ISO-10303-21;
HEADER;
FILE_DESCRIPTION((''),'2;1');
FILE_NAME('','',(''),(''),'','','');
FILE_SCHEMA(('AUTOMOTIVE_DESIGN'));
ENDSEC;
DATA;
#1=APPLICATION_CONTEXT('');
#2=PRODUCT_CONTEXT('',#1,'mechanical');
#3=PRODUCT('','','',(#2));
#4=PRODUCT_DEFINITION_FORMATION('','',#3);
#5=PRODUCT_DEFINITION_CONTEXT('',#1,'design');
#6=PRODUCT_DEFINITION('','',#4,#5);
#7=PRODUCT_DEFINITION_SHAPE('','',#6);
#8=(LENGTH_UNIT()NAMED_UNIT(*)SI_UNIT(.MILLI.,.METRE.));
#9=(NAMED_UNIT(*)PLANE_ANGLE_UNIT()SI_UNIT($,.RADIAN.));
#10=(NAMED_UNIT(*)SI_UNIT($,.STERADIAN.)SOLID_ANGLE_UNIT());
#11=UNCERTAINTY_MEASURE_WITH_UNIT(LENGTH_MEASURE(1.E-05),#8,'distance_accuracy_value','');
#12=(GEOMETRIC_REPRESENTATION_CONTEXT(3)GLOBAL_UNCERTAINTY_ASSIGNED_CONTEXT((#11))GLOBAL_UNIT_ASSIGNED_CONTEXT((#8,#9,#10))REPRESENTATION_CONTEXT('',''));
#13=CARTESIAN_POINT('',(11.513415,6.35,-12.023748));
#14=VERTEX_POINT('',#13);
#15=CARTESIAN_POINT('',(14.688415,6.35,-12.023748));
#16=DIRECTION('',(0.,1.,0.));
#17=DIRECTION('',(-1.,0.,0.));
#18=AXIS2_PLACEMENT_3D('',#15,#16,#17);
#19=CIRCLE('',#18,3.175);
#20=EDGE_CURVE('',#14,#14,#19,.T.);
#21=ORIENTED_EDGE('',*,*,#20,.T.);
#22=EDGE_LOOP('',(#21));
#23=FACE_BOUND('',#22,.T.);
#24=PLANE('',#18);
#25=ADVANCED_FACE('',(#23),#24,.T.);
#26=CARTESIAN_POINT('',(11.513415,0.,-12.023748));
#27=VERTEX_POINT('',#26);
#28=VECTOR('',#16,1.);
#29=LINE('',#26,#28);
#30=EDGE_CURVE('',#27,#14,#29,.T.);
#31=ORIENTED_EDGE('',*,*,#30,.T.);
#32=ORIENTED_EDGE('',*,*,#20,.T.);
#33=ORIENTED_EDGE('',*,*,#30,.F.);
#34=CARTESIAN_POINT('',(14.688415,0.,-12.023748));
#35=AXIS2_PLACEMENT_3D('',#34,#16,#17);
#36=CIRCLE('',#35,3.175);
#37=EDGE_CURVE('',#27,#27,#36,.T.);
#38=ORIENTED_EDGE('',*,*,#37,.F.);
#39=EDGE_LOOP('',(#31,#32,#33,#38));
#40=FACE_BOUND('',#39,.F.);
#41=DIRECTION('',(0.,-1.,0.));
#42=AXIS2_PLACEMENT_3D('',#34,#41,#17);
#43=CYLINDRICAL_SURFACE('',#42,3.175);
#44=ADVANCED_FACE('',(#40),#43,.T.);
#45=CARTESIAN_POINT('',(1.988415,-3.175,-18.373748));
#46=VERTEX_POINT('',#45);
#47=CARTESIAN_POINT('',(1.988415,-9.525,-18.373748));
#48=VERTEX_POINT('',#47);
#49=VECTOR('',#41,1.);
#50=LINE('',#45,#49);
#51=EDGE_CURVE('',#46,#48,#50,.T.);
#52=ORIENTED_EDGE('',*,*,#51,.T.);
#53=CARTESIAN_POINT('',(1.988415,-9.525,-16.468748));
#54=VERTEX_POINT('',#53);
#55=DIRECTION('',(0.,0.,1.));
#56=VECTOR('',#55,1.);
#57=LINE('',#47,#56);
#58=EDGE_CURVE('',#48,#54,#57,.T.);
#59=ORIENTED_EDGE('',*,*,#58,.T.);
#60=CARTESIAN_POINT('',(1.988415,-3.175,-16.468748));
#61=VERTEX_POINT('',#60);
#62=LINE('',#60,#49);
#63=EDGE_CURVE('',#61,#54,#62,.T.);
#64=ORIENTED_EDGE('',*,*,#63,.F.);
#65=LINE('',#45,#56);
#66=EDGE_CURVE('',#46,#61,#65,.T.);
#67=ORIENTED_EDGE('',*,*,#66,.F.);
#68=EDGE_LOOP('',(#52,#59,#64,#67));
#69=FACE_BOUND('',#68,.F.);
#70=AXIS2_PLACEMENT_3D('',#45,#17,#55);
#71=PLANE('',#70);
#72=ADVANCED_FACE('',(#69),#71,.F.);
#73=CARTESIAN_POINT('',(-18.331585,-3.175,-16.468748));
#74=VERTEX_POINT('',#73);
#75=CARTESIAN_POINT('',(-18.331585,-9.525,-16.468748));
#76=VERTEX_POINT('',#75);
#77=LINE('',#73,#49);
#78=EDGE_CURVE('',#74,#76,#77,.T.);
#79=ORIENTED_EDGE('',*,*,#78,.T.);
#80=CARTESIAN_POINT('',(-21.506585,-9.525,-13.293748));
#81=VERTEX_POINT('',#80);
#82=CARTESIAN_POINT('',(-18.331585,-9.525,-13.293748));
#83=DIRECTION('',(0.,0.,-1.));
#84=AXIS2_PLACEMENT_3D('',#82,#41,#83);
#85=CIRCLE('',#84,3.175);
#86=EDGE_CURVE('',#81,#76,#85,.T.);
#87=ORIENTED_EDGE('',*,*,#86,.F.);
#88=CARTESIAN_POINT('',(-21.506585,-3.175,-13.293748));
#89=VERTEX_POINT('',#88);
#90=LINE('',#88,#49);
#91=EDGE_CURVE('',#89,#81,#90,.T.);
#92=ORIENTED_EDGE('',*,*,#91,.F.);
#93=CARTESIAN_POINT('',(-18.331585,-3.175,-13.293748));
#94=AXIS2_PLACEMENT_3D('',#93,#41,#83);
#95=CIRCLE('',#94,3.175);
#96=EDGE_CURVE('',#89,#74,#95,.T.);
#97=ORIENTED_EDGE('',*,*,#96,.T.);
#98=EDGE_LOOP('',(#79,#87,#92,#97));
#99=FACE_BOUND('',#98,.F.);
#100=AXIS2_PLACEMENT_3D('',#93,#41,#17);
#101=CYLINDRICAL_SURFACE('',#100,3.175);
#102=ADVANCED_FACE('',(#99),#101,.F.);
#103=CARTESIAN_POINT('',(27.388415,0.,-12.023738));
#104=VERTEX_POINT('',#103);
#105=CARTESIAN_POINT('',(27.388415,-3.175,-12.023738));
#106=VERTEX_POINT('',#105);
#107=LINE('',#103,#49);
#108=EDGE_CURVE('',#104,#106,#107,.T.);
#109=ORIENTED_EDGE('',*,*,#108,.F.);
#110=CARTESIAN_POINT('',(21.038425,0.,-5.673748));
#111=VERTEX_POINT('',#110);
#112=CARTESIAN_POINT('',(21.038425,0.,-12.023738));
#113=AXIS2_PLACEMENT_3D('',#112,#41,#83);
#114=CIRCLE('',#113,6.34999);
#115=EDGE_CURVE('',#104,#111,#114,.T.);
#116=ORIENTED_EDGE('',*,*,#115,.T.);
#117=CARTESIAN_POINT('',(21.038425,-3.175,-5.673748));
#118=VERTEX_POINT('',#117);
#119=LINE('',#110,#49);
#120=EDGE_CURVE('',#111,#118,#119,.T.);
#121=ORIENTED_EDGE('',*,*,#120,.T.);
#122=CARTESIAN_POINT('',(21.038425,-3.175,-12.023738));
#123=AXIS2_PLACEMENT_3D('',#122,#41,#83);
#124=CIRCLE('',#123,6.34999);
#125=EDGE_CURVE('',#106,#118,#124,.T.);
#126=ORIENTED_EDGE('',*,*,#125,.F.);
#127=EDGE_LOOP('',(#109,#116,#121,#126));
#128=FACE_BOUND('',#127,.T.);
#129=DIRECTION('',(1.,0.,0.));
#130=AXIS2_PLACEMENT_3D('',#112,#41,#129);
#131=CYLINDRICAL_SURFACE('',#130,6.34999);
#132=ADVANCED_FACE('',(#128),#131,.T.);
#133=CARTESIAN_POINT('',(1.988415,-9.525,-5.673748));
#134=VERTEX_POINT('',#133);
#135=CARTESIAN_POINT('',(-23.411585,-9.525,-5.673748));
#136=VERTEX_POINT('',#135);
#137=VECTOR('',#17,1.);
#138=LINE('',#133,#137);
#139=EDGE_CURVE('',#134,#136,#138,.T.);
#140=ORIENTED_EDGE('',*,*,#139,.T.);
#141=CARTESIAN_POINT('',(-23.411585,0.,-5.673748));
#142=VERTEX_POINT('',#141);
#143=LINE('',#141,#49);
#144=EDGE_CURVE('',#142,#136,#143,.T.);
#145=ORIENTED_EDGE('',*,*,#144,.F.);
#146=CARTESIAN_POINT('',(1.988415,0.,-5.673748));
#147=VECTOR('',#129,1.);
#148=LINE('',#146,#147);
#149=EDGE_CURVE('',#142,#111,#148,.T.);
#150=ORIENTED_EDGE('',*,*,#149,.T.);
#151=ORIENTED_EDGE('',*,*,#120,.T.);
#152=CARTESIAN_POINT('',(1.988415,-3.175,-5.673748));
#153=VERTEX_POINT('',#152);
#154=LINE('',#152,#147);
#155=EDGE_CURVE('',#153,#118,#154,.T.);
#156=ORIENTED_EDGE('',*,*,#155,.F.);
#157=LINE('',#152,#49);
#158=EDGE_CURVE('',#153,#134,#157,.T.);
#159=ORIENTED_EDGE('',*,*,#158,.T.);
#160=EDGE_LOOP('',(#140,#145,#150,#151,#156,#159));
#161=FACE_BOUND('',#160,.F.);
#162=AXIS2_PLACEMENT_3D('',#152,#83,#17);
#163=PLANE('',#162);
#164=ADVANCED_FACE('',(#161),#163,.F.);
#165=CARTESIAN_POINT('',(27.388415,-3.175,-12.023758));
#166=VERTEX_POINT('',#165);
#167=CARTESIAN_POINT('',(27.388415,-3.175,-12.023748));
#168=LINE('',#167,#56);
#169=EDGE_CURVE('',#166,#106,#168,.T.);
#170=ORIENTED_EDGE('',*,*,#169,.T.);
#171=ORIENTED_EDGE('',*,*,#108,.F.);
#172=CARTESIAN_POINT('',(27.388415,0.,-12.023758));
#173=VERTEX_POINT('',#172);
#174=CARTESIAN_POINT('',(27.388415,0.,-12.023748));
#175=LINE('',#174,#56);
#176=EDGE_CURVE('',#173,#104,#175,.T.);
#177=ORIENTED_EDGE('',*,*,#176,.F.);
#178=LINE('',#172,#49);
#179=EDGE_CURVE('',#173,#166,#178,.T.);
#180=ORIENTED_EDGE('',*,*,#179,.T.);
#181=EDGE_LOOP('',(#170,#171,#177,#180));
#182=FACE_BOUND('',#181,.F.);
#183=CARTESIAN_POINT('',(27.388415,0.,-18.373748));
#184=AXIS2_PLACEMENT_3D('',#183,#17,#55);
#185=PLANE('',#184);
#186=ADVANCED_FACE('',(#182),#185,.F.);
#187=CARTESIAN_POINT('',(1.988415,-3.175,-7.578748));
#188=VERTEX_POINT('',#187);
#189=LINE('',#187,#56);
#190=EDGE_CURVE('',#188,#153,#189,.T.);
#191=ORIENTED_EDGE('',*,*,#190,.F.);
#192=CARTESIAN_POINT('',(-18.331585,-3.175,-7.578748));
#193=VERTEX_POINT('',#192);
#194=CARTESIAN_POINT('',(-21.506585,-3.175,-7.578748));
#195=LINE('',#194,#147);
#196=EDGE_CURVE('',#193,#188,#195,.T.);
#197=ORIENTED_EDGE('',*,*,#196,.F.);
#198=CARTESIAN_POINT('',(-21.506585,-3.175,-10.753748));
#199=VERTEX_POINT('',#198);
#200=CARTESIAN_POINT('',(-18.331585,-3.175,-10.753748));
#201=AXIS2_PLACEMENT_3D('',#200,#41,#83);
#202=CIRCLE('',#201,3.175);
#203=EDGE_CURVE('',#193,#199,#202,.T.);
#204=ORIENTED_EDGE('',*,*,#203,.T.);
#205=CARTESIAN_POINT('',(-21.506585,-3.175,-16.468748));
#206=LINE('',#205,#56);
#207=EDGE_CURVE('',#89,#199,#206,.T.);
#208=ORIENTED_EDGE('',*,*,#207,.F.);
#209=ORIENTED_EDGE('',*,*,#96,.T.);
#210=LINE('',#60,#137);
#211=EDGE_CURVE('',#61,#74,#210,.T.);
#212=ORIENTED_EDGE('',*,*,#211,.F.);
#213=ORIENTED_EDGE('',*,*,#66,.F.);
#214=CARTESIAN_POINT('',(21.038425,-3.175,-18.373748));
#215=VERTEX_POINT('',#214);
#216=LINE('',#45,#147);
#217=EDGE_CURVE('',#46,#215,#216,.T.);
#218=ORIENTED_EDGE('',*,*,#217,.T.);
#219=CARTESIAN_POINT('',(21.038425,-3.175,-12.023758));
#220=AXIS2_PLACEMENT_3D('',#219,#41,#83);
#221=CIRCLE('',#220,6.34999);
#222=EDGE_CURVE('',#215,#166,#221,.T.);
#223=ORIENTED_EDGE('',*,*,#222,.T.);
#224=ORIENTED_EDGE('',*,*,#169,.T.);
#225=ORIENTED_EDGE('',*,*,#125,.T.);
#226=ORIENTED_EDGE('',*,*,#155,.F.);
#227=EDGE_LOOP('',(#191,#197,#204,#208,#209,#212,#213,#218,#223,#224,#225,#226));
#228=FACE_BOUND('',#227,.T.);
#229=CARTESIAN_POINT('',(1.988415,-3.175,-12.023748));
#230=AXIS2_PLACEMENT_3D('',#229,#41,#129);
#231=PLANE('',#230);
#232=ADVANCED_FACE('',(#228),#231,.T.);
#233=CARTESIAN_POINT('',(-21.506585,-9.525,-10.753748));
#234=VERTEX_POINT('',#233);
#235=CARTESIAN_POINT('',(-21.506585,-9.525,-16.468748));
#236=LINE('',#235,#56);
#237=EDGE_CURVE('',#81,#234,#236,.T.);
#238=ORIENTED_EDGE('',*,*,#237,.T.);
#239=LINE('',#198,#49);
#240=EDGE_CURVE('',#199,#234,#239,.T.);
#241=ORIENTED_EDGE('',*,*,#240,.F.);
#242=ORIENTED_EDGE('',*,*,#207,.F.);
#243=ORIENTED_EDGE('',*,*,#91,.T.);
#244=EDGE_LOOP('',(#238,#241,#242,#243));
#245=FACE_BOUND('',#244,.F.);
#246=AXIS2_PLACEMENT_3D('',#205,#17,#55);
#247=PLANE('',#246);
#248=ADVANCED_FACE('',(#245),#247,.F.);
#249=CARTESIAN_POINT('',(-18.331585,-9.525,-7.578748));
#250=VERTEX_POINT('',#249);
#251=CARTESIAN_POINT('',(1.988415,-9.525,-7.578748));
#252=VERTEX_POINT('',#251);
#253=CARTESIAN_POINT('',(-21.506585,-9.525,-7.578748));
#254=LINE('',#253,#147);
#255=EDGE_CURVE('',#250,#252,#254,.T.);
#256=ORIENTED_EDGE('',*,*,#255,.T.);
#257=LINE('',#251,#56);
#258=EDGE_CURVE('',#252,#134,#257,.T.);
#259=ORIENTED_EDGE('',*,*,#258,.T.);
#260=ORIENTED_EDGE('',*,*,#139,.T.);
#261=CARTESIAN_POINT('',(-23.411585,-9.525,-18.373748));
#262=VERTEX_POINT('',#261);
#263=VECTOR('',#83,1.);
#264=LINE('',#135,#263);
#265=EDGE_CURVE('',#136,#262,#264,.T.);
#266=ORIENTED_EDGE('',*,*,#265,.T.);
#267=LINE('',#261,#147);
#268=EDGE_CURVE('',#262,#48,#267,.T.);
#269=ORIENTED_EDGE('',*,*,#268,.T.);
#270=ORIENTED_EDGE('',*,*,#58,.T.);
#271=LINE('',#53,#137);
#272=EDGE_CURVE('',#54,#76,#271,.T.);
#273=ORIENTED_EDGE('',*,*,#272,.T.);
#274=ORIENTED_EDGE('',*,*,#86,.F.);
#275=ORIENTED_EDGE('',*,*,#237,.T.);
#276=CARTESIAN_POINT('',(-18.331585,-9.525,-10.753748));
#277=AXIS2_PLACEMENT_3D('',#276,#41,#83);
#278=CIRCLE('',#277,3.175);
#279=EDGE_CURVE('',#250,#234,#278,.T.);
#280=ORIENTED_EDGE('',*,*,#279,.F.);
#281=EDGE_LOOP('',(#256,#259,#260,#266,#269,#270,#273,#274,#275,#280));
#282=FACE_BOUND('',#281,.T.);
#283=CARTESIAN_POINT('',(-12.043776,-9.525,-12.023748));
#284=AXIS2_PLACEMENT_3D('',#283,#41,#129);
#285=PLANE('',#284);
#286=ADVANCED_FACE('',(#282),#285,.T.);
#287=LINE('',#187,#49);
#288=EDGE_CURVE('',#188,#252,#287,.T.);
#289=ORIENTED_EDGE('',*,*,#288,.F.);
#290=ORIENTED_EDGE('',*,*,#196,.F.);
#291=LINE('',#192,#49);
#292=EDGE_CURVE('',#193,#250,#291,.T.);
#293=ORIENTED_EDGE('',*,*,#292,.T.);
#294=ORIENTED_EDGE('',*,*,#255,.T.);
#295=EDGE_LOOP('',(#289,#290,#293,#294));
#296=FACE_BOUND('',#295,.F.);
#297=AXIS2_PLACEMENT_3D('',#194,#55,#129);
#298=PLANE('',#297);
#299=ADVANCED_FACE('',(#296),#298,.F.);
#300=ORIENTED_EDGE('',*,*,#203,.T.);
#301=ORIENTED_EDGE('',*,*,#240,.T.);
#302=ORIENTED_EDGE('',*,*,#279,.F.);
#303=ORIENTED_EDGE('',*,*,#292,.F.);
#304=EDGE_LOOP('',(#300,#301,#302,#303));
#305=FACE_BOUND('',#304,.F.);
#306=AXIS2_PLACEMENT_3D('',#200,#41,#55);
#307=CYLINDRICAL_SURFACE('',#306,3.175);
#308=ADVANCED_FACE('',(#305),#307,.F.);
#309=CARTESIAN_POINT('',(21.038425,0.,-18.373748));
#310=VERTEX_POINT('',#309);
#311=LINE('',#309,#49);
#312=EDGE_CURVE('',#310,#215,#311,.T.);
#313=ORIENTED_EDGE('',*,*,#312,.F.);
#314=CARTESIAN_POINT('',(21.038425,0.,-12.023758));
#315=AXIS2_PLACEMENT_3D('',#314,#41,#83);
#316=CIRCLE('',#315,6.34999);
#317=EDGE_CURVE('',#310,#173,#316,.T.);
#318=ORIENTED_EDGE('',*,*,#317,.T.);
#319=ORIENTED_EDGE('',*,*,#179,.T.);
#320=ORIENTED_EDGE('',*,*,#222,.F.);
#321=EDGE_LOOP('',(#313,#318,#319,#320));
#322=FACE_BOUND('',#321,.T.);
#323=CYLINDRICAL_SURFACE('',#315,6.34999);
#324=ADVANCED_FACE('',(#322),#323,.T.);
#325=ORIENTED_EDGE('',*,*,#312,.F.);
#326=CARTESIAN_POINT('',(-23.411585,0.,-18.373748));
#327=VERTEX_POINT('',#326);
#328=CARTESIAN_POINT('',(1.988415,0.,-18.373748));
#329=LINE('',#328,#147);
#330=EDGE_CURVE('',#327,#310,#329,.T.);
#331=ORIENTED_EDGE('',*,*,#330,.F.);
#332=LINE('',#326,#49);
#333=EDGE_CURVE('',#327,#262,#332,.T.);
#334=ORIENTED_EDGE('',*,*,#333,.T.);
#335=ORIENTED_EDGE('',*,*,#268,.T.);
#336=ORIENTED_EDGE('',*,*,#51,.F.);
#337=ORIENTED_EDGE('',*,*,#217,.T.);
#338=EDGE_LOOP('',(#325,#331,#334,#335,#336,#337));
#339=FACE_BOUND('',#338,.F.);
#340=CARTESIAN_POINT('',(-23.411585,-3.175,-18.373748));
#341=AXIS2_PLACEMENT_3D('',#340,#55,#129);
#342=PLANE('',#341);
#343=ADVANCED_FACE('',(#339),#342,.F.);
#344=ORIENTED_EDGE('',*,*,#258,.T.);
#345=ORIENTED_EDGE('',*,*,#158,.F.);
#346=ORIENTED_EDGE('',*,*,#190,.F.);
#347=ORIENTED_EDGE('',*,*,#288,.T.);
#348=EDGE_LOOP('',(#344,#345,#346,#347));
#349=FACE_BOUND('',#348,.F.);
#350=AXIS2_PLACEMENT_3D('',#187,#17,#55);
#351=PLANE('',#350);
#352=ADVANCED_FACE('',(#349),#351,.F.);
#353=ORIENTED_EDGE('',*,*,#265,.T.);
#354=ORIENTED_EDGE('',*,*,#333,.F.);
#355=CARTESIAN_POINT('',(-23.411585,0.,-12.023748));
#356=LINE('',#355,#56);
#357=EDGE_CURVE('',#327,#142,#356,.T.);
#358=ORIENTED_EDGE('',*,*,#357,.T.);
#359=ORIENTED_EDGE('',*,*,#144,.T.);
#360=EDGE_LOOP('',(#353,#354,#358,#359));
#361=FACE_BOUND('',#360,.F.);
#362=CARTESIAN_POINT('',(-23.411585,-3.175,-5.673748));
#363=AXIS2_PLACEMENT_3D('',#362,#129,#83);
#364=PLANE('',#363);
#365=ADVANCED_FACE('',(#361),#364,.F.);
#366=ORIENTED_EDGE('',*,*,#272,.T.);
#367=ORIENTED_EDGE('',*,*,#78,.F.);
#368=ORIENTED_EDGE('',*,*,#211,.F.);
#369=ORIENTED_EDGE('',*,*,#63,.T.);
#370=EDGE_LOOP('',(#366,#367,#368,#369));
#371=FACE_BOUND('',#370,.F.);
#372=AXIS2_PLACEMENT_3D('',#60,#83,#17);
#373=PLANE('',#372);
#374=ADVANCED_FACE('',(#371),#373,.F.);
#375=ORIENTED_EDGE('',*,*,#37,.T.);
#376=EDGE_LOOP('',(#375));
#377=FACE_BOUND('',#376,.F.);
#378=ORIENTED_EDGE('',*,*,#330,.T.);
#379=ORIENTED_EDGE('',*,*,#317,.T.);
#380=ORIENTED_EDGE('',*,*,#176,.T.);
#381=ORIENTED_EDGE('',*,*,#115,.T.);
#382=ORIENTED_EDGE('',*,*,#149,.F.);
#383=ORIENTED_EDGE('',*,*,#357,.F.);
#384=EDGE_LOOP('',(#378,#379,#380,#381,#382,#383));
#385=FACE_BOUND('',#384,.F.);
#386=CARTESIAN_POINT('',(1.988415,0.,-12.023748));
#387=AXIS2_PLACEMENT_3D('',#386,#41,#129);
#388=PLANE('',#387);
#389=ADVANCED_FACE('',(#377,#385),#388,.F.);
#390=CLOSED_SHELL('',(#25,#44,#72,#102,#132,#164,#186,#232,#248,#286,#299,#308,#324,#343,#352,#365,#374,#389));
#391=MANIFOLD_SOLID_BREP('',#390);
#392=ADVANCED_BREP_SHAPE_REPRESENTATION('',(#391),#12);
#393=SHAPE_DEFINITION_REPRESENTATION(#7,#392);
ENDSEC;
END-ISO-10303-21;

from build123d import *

# Parameters (mm, degrees)
F0_W     = 50.8
F0_H     = 12.7
F1_DEPTH = 3.175
F2_R     = 3.175
F3_DEPTH = 6.35
F5_DEPTH = 6.35
F6_R     = 3.175
F7_R     = 6.34999


# Not quite as in the source:
# - a fillet or chamfer is up to 0.001 mm smaller than in the source, because OpenCascade refuses the exact size


with BuildPart() as f1:
    # F0 (on Front) → F1 (new body)
    with BuildSketch(Plane.XZ):
        with Locations((1.988414675, -12.0237477115)):
            Rectangle(F0_W, F0_H)
    extrude(amount=F1_DEPTH)

    # F2 (on face) → F3 (join)
    with BuildSketch(Plane(origin=(0, 0, 0), x_dir=(-1, 0, 0), z_dir=(0, 1, 0))):
        with Locations((-14.688414675, -12.0237477115)):
            Circle(F2_R)
    extrude(amount=F3_DEPTH)

    # F4 (on face) → F5 (join)
    with BuildSketch(Plane.XZ.offset(3.175)):
        Polygon((1.988414675, -5.6737477115), (-23.411585325, -5.6737477115), (-23.411585325, -18.3737477115), (1.988414675, -18.3737477115), (1.988414675, -16.4687477115), (-21.506585325, -16.4687477115), (-21.506585325, -7.5787477115), (1.988414675, -7.5787477115), align=None)
    extrude(amount=F5_DEPTH)

    # F6
    f6_edges = [f1.edges().sort_by_distance(p)[0] for p in [
        (-21.506585, -6.35, -7.578748),
        (-21.506585, -6.35, -16.468748),
    ]]
    fillet(f6_edges, radius=F6_R)

    # F7 (radius 6.35 in the source; OpenCascade refuses exactly that, so slightly less here)
    f7_edges = [f1.edges().sort_by_distance(p)[0] for p in [
        (27.388415, -1.5875, -5.673748),
        (27.388415, -1.5875, -18.373748),
    ]]
    fillet(f7_edges, radius=F7_R)


solid = f1.part
